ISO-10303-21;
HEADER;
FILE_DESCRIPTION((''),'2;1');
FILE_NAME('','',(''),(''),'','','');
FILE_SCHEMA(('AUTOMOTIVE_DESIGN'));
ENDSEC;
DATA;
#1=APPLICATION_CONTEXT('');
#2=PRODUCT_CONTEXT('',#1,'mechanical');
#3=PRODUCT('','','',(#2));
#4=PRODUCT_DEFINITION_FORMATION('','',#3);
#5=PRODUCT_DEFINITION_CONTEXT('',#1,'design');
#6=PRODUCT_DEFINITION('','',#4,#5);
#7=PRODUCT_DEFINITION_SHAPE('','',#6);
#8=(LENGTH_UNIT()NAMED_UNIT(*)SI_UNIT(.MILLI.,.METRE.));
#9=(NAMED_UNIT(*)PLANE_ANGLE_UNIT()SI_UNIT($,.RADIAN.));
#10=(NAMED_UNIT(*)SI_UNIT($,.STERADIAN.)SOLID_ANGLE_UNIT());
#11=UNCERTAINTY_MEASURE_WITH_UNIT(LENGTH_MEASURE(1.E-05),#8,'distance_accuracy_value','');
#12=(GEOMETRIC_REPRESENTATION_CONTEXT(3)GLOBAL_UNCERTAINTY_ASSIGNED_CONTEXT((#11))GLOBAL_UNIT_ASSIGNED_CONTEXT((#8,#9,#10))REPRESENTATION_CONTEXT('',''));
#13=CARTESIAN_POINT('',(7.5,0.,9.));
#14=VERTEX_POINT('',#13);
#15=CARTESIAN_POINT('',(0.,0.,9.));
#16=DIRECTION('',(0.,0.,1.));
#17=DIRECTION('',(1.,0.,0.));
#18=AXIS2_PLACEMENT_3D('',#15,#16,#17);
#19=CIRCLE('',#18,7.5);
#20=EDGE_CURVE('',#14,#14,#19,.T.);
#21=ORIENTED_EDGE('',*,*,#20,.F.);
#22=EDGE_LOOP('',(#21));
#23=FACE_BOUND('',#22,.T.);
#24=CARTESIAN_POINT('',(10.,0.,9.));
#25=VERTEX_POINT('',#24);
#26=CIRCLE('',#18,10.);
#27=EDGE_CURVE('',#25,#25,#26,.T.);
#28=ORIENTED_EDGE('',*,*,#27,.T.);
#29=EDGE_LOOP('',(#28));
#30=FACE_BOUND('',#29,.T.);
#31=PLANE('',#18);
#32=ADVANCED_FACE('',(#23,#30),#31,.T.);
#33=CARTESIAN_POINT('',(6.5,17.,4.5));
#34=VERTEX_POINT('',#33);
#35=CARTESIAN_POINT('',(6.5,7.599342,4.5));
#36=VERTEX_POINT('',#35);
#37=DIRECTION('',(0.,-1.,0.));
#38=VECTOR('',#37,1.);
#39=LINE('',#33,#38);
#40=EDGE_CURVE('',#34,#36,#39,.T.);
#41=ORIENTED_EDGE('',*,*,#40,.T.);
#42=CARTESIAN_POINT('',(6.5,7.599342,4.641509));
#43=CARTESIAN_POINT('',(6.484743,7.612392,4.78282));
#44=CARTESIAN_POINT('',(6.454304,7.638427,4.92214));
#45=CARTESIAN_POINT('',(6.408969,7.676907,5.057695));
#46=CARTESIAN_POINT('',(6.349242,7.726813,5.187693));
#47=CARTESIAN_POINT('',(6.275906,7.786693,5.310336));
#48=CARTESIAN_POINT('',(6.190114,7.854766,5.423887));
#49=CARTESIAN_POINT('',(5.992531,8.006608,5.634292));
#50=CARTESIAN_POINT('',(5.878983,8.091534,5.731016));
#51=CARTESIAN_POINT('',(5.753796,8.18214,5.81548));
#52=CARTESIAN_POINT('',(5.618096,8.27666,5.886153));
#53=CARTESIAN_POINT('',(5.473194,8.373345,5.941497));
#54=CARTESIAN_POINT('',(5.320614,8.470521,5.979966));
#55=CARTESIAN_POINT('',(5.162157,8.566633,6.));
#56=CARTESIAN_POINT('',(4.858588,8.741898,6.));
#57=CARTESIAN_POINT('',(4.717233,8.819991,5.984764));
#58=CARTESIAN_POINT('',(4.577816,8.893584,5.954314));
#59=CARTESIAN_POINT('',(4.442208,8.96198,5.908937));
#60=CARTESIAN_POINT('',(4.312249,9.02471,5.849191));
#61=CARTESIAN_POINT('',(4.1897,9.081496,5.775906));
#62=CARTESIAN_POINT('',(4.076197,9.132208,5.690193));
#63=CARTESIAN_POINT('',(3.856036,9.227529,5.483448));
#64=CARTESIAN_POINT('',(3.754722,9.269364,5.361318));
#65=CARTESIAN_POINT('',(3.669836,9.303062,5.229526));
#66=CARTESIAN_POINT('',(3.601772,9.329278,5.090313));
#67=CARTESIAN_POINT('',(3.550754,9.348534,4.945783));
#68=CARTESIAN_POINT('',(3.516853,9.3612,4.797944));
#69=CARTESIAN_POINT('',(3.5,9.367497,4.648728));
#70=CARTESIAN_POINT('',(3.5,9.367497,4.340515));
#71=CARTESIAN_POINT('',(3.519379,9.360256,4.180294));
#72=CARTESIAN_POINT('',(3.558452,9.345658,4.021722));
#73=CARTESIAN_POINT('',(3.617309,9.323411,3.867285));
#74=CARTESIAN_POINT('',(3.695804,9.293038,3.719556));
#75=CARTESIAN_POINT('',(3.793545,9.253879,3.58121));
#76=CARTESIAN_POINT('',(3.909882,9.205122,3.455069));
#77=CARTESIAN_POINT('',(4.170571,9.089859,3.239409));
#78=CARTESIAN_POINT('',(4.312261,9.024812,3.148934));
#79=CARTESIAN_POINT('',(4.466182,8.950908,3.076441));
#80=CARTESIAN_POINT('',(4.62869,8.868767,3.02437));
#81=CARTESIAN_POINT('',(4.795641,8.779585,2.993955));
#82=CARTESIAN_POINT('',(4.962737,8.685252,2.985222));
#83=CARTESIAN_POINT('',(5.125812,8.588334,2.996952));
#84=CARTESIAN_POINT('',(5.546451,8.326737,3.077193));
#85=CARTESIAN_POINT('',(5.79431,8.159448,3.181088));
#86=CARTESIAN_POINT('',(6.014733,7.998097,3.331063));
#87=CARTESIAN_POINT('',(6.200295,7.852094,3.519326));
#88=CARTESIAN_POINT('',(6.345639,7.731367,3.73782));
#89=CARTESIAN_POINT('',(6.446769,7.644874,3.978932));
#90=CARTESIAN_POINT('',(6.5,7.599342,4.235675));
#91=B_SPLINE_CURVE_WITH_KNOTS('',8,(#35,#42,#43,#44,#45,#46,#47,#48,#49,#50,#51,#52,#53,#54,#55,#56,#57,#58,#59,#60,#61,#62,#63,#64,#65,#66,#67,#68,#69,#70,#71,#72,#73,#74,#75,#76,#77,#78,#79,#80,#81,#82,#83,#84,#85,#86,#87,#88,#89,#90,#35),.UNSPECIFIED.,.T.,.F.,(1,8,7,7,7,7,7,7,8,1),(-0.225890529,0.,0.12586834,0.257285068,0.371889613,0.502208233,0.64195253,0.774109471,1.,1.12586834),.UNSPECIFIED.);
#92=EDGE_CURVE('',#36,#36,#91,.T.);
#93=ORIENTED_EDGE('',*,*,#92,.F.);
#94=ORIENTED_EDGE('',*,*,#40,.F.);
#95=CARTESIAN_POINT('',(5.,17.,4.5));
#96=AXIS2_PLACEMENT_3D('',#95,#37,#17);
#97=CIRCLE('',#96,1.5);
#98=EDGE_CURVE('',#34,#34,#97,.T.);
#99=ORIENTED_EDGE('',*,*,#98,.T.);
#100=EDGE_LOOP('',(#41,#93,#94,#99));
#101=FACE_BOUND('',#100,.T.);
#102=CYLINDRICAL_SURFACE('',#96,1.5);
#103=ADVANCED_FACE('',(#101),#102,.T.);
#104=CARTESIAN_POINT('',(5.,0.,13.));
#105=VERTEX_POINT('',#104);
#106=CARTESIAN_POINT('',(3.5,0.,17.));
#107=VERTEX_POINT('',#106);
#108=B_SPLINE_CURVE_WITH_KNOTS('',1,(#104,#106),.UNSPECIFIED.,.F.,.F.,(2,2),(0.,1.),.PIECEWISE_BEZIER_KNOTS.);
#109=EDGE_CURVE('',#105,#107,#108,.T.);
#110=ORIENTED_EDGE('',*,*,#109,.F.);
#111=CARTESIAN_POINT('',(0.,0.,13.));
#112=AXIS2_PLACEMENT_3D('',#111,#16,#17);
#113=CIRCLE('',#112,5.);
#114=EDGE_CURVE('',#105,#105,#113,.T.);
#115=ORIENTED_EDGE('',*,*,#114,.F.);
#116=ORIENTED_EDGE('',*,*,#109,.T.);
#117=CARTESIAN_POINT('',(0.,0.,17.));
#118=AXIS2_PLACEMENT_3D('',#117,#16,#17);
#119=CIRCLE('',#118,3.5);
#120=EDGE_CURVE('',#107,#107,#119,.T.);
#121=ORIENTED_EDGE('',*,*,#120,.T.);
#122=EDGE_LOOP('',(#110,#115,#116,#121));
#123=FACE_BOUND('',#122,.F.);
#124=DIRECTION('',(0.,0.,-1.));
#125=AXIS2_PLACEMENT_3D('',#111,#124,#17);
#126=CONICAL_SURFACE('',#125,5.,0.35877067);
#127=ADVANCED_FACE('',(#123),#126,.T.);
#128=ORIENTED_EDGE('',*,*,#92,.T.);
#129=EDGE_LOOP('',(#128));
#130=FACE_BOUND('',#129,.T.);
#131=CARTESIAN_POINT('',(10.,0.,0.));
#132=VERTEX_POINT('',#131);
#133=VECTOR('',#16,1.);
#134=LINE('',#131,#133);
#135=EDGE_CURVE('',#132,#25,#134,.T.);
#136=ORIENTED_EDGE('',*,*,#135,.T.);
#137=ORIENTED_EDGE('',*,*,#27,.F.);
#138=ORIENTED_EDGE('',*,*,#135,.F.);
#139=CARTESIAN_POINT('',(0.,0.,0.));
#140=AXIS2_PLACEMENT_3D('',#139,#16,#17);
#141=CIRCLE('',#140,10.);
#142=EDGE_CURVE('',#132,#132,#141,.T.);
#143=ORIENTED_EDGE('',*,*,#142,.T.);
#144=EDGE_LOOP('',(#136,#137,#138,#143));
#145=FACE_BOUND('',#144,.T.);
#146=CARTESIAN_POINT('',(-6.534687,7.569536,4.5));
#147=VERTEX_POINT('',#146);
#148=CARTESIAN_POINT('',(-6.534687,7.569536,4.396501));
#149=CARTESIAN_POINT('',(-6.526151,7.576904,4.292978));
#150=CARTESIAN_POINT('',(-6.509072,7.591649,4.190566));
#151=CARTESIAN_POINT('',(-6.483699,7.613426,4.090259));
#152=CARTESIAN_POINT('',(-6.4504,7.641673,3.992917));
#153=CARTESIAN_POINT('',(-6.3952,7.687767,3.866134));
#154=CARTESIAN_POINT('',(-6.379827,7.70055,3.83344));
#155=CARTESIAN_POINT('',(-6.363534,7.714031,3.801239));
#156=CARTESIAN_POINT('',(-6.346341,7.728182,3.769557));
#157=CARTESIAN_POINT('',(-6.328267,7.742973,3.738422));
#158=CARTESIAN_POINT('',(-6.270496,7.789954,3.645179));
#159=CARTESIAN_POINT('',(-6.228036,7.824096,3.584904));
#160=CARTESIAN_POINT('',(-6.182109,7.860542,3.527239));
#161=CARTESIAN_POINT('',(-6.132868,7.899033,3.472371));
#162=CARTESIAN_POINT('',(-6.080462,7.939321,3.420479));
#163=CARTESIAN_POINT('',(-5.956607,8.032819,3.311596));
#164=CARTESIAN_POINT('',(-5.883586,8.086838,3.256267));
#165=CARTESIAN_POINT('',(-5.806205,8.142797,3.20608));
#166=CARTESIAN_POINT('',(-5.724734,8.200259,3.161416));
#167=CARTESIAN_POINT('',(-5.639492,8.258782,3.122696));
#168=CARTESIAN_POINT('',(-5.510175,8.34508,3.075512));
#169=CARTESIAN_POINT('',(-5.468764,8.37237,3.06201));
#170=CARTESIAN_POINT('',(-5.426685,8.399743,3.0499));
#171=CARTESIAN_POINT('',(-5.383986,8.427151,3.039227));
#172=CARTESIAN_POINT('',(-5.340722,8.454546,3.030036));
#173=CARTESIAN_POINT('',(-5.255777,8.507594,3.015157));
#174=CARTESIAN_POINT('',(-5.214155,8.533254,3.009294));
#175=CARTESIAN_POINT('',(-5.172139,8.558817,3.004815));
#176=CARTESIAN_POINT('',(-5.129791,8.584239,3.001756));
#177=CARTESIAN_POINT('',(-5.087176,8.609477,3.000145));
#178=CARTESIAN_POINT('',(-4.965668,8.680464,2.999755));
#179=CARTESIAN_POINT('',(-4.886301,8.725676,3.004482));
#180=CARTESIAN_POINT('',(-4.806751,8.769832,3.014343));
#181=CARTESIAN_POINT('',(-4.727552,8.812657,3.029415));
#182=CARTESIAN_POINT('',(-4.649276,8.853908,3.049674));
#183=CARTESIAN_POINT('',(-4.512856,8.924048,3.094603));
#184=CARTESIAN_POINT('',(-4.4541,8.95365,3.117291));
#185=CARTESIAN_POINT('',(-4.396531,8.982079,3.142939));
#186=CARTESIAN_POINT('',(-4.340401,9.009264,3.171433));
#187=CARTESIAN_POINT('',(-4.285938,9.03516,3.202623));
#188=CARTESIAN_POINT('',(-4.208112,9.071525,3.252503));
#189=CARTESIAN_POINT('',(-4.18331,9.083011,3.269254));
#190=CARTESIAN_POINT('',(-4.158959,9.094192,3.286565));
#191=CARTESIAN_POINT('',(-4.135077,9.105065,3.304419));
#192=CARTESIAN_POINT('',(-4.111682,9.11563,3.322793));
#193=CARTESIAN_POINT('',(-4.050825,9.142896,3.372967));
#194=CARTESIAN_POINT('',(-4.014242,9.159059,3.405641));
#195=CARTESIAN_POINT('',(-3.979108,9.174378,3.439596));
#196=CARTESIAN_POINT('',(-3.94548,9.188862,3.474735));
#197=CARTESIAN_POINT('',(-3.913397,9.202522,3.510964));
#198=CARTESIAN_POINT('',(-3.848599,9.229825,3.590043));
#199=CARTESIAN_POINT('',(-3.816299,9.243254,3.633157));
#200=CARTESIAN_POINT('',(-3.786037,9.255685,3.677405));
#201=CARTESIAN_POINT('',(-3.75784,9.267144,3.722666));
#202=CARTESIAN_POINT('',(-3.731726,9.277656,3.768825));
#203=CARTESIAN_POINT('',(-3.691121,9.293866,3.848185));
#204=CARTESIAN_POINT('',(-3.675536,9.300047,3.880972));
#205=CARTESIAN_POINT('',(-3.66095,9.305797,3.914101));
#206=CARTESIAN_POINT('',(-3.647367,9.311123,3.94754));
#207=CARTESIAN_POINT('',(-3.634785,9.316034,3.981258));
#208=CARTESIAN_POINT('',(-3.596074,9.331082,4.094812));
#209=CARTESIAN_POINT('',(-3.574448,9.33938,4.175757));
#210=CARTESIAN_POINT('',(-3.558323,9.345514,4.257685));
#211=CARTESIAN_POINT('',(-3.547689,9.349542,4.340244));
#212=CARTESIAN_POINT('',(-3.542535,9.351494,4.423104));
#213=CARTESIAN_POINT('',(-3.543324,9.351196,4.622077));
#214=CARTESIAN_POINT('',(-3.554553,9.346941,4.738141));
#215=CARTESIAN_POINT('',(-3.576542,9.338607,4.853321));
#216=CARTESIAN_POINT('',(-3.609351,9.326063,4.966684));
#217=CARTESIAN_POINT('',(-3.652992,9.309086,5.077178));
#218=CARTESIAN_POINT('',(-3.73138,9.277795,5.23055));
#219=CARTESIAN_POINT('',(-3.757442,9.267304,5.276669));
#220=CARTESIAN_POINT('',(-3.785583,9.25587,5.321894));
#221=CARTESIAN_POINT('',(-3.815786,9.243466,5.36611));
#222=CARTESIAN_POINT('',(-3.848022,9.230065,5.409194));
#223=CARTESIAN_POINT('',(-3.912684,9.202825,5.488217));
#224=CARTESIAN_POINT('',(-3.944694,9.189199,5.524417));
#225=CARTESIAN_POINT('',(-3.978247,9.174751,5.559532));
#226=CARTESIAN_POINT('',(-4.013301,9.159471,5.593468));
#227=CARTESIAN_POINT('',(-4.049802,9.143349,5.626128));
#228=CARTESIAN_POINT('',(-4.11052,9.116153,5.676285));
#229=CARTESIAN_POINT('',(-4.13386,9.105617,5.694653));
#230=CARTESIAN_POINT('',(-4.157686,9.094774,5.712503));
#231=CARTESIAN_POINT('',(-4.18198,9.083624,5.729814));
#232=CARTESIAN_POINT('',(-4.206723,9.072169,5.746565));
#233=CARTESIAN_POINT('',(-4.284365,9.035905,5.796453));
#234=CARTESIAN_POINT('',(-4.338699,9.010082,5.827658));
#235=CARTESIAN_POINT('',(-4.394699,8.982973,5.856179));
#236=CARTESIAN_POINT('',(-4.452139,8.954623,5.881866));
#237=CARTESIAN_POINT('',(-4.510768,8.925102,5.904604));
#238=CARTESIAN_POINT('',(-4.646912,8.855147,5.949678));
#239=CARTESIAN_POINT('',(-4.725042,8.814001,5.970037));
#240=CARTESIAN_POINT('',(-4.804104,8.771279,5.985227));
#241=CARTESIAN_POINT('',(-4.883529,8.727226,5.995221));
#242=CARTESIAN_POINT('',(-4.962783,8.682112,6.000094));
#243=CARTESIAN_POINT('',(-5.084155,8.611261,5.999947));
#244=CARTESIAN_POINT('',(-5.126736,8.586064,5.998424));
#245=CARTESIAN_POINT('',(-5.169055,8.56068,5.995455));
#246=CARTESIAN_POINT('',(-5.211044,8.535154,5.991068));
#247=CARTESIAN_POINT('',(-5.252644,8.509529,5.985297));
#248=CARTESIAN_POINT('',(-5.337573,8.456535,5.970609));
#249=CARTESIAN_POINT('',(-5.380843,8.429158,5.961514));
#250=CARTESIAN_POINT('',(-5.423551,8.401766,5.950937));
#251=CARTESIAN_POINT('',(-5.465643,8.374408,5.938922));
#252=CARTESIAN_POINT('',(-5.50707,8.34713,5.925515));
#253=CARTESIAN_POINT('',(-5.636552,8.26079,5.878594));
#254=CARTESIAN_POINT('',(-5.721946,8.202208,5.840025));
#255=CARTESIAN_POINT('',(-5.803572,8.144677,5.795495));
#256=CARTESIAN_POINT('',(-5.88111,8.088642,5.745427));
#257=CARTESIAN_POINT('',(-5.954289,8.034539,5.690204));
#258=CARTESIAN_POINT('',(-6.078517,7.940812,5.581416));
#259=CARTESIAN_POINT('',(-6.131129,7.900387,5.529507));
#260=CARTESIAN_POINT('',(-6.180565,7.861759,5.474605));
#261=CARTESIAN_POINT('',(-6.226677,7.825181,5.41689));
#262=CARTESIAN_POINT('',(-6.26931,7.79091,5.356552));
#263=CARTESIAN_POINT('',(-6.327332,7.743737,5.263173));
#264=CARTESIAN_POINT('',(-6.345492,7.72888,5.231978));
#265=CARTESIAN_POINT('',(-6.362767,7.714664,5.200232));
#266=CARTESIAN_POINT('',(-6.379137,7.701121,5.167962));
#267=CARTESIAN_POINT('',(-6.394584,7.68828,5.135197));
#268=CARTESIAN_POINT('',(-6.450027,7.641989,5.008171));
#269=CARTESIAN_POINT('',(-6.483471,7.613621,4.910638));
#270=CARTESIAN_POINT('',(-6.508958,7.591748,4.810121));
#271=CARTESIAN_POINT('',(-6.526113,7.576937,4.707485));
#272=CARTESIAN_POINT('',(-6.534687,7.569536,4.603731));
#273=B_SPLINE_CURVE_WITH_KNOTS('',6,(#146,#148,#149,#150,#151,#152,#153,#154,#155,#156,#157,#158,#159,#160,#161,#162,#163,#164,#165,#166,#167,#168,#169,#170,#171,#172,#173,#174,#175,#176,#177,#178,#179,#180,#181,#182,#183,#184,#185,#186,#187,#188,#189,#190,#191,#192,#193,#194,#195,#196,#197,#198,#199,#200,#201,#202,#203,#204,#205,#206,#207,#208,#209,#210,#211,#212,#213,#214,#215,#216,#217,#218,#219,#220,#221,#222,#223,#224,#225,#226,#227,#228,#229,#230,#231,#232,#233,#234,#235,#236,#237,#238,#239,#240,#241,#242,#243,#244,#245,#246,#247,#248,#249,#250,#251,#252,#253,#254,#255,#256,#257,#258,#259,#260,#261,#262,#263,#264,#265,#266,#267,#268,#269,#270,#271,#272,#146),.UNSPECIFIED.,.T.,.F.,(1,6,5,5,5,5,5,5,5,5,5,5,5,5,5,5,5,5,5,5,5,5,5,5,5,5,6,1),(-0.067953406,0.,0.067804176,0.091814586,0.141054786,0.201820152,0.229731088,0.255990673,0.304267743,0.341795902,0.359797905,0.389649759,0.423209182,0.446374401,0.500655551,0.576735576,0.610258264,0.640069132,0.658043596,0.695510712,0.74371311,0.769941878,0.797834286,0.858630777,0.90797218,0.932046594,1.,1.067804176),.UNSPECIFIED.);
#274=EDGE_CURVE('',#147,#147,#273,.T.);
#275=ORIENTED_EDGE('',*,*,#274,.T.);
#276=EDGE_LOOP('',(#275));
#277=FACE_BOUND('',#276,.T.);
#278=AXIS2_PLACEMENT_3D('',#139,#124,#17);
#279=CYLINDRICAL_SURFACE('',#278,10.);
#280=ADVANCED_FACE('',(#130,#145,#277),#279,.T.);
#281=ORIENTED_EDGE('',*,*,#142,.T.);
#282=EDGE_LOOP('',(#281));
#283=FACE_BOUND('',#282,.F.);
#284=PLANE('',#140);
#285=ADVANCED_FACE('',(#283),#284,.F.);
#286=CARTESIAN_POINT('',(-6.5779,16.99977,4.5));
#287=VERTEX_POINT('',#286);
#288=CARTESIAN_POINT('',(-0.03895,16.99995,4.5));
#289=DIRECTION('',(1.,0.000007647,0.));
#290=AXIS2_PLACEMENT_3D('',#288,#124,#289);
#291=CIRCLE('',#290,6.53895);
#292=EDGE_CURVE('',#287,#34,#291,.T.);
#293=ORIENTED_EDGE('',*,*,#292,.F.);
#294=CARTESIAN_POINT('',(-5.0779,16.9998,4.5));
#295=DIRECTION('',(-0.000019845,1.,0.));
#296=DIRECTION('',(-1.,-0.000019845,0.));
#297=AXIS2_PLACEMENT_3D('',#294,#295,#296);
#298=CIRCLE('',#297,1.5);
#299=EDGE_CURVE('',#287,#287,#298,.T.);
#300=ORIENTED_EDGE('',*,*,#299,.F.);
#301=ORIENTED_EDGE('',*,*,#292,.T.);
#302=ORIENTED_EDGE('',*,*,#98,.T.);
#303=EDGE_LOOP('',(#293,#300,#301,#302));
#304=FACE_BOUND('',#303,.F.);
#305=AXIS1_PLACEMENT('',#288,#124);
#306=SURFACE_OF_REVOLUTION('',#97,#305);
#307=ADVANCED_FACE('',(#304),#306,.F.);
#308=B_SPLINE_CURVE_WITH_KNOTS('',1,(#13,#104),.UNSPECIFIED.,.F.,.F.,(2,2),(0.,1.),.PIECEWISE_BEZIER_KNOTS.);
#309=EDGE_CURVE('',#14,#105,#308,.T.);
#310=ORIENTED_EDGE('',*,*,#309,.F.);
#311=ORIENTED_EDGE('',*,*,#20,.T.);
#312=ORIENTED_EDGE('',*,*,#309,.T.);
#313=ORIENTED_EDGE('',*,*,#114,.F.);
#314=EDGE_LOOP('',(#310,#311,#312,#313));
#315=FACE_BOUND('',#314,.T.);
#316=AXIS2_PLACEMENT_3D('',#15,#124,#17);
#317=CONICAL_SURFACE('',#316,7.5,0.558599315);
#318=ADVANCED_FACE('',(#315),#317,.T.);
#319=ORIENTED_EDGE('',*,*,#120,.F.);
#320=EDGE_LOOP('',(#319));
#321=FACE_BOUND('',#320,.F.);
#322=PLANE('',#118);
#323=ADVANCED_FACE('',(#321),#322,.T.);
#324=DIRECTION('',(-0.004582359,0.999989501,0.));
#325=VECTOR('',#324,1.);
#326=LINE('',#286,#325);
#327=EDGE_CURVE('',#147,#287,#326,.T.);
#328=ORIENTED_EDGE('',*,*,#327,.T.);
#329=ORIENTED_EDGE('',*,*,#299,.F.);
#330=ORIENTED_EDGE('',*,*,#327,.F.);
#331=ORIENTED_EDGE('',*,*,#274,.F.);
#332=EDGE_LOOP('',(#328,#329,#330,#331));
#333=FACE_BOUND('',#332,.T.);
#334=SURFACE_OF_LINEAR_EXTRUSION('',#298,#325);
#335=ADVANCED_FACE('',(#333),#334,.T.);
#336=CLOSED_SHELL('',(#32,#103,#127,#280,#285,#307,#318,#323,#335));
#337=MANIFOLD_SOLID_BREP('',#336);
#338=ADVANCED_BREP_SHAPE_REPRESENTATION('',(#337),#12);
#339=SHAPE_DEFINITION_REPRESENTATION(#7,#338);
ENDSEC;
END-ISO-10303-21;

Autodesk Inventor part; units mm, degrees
sketch "Sketch1" plane through (0, 0, 0) normal (0, 0, 1) x (1, 0, 0)
  circle A0 centre (0, 0) radius 10
  dimension "d0" = 20
extrude "Extrusion1" add sketch "Sketch1" along normal blind 9
sketch "Sketch2" plane through (0, 0, 9) normal (0, 0, 1) x (1, 0, 0)
  circle A0 centre (0, 0) radius 7.5
  dimension "d3" = 15
ref_plane "Work Plane1" through (0, 0, 13) normal (0, 0, 1) x (1, 0, 0)
sketch "Sketch3" plane through (0, 0, 13) normal (0, 0, 1) x (1, 0, 0)
  circle A0 centre (0, 0) radius 5
  dimension "d5" = 10
loft "Loft1" add profiles "Sketch2", "Sketch3"
sketch "Sketch4" plane through (0, 0, 13) normal (0, 0, 1) x (1, 0, 0)
  circle A0 centre (0, 0) radius 5
  dimension "d10" = 10
ref_plane "Work Plane2" through (0, 0, 17) normal (0, 0, 1) x (1, 0, 0)
sketch "Sketch5" plane through (0, 0, 17) normal (0, 0, 1) x (1, 0, 0)
  circle A0 centre (0, 0) radius 3.5
  dimension "d12" = 7
loft "Loft2" add profiles "Sketch5" section 1 edges at (-5, 0, 13)
ref_plane "Work Plane3" through (0, 0, 4.5) normal (0, 0, 1) x (1, 0, 0)
sketch "Sketch6" plane through (0, 0, 4.5) normal (0, 0, 1) x (1, 0, 0)
  arc A0 (5, 17) -> (-5.0779, 16.9998) centre (-0.0389, 17) ccw
  line L0 (5, 17) -> (5, 0)
  circle A1 centre (0, 0) radius 5 projected
  line L1 (5, 17) -> (22, 17) construction
  line L2 (-5.0779, 16.9998) -> (-5, 0)
  line L3 (0, 0) -> (0, 5)
  dimension "d20" = 17
  dimension "d21" = 90
  dimension "d22" = 17
ref_plane "Work Plane4" through (5, 0, 4.5) normal (0, -1, 0) x (1, 0, 0)
sketch "Sketch7" plane through (5, 0, 4.5) normal (0, -1, 0) x (1, 0, 0)
  circle A0 centre (0, 0) radius 1.5
  point P0 (-5, -4.5)
  dimension "d23" = 3
sweep "Sweep1" add profiles "Sketch7" path "Sketch6" path curves L0 A0 L2
properties part number "padlock"
